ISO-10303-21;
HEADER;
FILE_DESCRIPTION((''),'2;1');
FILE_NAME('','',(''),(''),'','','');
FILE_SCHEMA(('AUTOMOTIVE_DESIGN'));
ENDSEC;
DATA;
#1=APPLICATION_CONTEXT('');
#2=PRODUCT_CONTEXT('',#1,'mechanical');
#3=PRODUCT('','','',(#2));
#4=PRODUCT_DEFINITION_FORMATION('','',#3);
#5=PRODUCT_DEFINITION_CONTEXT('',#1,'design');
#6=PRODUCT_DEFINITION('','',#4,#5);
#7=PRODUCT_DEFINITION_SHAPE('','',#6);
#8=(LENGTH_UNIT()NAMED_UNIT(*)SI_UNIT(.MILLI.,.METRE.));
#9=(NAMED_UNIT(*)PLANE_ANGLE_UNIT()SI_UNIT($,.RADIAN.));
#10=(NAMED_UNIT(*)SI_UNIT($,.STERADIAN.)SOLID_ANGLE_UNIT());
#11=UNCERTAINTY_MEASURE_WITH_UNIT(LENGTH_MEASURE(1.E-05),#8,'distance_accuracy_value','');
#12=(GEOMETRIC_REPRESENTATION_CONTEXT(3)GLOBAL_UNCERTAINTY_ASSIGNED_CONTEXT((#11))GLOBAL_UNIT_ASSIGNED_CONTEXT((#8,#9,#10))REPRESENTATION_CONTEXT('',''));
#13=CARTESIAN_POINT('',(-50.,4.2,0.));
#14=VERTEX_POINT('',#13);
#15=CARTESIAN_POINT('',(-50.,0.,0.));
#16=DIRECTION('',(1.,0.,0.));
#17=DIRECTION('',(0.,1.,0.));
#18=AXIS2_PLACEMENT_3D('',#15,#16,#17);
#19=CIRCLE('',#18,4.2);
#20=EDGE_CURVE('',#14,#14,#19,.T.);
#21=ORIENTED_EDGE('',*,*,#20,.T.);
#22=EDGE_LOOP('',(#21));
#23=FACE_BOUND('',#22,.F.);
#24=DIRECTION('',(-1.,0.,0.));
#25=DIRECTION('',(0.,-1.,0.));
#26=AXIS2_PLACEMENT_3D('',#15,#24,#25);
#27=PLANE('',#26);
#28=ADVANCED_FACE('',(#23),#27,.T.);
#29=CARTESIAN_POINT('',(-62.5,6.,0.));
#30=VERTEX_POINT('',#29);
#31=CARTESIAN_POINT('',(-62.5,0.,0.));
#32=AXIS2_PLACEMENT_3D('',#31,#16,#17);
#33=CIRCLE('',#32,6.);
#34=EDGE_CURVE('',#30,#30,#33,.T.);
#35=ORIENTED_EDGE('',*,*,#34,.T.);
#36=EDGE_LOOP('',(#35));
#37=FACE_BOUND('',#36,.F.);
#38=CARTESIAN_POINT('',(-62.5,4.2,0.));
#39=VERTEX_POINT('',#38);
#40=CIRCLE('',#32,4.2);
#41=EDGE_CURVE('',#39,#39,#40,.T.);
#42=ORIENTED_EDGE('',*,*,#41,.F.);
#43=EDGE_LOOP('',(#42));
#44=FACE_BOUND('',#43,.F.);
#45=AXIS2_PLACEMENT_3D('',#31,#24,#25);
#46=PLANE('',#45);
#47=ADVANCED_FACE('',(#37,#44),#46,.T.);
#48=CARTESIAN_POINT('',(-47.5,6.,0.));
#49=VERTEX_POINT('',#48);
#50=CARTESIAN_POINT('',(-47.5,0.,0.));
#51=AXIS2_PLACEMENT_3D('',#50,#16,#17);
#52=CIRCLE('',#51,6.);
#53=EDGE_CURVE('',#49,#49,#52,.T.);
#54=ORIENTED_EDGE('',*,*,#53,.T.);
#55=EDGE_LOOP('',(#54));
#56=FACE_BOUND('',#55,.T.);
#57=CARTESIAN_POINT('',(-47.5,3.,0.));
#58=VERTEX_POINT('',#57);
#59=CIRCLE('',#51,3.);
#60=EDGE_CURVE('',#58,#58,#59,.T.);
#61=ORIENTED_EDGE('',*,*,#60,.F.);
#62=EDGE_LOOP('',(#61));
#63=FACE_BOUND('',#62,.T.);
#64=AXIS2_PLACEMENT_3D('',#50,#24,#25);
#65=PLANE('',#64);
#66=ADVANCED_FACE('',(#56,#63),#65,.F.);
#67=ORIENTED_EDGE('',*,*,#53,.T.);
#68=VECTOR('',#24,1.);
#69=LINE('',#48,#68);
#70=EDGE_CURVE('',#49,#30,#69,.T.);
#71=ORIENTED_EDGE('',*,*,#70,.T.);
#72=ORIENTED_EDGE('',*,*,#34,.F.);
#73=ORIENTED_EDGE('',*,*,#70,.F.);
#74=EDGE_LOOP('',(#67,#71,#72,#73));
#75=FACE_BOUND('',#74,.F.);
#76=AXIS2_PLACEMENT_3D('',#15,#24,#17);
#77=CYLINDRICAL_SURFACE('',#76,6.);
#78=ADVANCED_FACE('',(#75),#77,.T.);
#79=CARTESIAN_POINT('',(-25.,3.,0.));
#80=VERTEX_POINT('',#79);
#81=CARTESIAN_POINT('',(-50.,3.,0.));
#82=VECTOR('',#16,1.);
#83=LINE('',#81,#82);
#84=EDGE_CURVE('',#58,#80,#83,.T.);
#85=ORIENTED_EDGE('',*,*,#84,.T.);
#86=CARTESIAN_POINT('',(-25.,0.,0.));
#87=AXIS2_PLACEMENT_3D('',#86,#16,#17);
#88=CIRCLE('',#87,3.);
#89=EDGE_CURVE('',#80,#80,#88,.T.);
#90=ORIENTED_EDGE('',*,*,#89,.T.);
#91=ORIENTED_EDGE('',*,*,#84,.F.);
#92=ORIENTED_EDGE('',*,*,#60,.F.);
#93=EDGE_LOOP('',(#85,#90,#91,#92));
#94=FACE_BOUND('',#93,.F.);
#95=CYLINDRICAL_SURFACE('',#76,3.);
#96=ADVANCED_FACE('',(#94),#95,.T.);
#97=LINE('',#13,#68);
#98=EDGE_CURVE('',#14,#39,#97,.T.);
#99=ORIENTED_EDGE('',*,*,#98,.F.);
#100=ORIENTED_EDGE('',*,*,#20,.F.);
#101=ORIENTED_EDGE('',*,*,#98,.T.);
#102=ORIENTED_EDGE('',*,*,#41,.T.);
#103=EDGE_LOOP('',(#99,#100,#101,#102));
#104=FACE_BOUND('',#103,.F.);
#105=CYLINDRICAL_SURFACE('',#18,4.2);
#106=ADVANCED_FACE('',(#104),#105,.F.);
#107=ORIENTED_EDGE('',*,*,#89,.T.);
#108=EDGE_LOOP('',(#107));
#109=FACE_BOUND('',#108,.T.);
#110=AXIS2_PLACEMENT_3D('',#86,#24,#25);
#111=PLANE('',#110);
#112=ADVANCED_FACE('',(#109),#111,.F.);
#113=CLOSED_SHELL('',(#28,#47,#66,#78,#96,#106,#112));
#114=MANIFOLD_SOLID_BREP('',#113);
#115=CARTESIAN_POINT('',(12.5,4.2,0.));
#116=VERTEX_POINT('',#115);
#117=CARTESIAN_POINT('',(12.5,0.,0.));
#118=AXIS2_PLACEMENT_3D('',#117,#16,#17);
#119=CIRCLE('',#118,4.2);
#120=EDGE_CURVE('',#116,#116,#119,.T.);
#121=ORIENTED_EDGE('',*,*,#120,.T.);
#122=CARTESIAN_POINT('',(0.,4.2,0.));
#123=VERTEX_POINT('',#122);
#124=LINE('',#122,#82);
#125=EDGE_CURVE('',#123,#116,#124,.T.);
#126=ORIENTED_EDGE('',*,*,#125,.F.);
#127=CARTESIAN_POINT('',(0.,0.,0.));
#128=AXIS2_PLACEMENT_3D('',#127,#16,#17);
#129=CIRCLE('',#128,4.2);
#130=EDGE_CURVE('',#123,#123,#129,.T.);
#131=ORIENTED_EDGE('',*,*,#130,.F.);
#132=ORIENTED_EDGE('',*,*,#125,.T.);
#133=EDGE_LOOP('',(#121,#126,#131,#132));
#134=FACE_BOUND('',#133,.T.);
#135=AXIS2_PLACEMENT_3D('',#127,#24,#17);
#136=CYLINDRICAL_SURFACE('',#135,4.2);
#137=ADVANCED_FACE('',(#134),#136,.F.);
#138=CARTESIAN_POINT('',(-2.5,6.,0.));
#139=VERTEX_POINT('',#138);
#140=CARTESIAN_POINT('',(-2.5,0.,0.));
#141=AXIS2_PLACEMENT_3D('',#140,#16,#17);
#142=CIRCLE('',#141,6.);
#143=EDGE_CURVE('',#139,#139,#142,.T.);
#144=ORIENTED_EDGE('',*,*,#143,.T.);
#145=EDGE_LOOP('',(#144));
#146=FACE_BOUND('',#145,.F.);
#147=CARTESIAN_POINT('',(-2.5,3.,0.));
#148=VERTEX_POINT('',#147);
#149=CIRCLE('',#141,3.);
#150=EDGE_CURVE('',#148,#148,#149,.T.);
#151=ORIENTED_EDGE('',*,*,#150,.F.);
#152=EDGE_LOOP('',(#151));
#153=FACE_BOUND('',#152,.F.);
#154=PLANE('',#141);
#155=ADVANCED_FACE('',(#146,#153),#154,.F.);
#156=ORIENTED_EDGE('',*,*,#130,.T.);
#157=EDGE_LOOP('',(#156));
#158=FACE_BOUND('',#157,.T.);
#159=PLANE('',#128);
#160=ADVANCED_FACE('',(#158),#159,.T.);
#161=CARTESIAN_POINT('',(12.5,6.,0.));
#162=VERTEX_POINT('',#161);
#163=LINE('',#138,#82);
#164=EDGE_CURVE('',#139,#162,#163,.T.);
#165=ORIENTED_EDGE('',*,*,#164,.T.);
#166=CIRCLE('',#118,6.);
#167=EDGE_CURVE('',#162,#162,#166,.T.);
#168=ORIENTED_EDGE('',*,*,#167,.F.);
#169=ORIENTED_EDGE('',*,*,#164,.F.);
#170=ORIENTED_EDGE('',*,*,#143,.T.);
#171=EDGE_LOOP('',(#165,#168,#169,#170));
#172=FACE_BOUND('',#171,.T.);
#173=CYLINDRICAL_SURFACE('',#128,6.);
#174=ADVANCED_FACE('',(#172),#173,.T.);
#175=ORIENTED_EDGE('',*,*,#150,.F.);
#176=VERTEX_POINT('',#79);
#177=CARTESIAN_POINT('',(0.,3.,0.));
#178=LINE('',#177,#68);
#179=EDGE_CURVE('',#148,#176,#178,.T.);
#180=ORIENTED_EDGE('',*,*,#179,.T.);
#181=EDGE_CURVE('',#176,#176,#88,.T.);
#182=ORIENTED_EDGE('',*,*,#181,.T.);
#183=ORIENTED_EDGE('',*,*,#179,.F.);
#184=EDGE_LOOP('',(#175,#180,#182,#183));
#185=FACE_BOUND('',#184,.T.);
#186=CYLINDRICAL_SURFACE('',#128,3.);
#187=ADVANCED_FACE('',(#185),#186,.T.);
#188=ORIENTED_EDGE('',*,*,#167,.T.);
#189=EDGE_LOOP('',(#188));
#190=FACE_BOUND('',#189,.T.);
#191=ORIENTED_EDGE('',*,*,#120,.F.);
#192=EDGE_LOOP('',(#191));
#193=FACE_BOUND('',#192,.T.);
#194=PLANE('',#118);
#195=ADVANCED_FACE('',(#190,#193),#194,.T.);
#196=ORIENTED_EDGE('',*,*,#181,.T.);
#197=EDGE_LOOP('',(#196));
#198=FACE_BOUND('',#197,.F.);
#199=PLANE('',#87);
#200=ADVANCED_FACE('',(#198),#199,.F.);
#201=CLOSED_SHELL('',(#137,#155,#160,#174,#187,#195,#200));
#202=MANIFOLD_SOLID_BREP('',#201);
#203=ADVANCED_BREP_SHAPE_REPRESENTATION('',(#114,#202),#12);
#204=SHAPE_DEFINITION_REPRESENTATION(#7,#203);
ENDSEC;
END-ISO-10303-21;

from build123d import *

# Parameters (mm, degrees)
F0_R     = 6
F0_R_2   = 4.2
F1_DEPTH = 12.5
F0_R_3   = 3
F2_DEPTH = 2.5
F3_DEPTH = 25


# Not quite as in the source:
# - a feature names something its author has since deleted; it is built from what else it names


with BuildPart() as f1:
    # F0 (on Right) → F1 (new body)
    with BuildSketch(Plane.YZ):
        Circle(F0_R)
        Circle(F0_R_2, mode=Mode.SUBTRACT)
    extrude(amount=F1_DEPTH)

    # F0 (on Right) → F2 (join)
    with BuildSketch(Plane.YZ):
        Circle(F0_R)
        Circle(F0_R_2, mode=Mode.SUBTRACT)
        Circle(F0_R_2)
        Circle(F0_R_3, mode=Mode.SUBTRACT)
    extrude(amount=-F2_DEPTH)

    # F0 (on Right) → F3 (join)
    with BuildSketch(Plane.YZ):
        Circle(F0_R_3)
    extrude(amount=-F3_DEPTH)


with BuildPart() as f4_1:
    # F4: instance of F1
    add(f1.part.mirror(Plane(origin=(-25, 0, 0), x_dir=(0, 1, 0), z_dir=(-1, 0, 0))))


solid = Compound([f1.part, f4_1.part])
